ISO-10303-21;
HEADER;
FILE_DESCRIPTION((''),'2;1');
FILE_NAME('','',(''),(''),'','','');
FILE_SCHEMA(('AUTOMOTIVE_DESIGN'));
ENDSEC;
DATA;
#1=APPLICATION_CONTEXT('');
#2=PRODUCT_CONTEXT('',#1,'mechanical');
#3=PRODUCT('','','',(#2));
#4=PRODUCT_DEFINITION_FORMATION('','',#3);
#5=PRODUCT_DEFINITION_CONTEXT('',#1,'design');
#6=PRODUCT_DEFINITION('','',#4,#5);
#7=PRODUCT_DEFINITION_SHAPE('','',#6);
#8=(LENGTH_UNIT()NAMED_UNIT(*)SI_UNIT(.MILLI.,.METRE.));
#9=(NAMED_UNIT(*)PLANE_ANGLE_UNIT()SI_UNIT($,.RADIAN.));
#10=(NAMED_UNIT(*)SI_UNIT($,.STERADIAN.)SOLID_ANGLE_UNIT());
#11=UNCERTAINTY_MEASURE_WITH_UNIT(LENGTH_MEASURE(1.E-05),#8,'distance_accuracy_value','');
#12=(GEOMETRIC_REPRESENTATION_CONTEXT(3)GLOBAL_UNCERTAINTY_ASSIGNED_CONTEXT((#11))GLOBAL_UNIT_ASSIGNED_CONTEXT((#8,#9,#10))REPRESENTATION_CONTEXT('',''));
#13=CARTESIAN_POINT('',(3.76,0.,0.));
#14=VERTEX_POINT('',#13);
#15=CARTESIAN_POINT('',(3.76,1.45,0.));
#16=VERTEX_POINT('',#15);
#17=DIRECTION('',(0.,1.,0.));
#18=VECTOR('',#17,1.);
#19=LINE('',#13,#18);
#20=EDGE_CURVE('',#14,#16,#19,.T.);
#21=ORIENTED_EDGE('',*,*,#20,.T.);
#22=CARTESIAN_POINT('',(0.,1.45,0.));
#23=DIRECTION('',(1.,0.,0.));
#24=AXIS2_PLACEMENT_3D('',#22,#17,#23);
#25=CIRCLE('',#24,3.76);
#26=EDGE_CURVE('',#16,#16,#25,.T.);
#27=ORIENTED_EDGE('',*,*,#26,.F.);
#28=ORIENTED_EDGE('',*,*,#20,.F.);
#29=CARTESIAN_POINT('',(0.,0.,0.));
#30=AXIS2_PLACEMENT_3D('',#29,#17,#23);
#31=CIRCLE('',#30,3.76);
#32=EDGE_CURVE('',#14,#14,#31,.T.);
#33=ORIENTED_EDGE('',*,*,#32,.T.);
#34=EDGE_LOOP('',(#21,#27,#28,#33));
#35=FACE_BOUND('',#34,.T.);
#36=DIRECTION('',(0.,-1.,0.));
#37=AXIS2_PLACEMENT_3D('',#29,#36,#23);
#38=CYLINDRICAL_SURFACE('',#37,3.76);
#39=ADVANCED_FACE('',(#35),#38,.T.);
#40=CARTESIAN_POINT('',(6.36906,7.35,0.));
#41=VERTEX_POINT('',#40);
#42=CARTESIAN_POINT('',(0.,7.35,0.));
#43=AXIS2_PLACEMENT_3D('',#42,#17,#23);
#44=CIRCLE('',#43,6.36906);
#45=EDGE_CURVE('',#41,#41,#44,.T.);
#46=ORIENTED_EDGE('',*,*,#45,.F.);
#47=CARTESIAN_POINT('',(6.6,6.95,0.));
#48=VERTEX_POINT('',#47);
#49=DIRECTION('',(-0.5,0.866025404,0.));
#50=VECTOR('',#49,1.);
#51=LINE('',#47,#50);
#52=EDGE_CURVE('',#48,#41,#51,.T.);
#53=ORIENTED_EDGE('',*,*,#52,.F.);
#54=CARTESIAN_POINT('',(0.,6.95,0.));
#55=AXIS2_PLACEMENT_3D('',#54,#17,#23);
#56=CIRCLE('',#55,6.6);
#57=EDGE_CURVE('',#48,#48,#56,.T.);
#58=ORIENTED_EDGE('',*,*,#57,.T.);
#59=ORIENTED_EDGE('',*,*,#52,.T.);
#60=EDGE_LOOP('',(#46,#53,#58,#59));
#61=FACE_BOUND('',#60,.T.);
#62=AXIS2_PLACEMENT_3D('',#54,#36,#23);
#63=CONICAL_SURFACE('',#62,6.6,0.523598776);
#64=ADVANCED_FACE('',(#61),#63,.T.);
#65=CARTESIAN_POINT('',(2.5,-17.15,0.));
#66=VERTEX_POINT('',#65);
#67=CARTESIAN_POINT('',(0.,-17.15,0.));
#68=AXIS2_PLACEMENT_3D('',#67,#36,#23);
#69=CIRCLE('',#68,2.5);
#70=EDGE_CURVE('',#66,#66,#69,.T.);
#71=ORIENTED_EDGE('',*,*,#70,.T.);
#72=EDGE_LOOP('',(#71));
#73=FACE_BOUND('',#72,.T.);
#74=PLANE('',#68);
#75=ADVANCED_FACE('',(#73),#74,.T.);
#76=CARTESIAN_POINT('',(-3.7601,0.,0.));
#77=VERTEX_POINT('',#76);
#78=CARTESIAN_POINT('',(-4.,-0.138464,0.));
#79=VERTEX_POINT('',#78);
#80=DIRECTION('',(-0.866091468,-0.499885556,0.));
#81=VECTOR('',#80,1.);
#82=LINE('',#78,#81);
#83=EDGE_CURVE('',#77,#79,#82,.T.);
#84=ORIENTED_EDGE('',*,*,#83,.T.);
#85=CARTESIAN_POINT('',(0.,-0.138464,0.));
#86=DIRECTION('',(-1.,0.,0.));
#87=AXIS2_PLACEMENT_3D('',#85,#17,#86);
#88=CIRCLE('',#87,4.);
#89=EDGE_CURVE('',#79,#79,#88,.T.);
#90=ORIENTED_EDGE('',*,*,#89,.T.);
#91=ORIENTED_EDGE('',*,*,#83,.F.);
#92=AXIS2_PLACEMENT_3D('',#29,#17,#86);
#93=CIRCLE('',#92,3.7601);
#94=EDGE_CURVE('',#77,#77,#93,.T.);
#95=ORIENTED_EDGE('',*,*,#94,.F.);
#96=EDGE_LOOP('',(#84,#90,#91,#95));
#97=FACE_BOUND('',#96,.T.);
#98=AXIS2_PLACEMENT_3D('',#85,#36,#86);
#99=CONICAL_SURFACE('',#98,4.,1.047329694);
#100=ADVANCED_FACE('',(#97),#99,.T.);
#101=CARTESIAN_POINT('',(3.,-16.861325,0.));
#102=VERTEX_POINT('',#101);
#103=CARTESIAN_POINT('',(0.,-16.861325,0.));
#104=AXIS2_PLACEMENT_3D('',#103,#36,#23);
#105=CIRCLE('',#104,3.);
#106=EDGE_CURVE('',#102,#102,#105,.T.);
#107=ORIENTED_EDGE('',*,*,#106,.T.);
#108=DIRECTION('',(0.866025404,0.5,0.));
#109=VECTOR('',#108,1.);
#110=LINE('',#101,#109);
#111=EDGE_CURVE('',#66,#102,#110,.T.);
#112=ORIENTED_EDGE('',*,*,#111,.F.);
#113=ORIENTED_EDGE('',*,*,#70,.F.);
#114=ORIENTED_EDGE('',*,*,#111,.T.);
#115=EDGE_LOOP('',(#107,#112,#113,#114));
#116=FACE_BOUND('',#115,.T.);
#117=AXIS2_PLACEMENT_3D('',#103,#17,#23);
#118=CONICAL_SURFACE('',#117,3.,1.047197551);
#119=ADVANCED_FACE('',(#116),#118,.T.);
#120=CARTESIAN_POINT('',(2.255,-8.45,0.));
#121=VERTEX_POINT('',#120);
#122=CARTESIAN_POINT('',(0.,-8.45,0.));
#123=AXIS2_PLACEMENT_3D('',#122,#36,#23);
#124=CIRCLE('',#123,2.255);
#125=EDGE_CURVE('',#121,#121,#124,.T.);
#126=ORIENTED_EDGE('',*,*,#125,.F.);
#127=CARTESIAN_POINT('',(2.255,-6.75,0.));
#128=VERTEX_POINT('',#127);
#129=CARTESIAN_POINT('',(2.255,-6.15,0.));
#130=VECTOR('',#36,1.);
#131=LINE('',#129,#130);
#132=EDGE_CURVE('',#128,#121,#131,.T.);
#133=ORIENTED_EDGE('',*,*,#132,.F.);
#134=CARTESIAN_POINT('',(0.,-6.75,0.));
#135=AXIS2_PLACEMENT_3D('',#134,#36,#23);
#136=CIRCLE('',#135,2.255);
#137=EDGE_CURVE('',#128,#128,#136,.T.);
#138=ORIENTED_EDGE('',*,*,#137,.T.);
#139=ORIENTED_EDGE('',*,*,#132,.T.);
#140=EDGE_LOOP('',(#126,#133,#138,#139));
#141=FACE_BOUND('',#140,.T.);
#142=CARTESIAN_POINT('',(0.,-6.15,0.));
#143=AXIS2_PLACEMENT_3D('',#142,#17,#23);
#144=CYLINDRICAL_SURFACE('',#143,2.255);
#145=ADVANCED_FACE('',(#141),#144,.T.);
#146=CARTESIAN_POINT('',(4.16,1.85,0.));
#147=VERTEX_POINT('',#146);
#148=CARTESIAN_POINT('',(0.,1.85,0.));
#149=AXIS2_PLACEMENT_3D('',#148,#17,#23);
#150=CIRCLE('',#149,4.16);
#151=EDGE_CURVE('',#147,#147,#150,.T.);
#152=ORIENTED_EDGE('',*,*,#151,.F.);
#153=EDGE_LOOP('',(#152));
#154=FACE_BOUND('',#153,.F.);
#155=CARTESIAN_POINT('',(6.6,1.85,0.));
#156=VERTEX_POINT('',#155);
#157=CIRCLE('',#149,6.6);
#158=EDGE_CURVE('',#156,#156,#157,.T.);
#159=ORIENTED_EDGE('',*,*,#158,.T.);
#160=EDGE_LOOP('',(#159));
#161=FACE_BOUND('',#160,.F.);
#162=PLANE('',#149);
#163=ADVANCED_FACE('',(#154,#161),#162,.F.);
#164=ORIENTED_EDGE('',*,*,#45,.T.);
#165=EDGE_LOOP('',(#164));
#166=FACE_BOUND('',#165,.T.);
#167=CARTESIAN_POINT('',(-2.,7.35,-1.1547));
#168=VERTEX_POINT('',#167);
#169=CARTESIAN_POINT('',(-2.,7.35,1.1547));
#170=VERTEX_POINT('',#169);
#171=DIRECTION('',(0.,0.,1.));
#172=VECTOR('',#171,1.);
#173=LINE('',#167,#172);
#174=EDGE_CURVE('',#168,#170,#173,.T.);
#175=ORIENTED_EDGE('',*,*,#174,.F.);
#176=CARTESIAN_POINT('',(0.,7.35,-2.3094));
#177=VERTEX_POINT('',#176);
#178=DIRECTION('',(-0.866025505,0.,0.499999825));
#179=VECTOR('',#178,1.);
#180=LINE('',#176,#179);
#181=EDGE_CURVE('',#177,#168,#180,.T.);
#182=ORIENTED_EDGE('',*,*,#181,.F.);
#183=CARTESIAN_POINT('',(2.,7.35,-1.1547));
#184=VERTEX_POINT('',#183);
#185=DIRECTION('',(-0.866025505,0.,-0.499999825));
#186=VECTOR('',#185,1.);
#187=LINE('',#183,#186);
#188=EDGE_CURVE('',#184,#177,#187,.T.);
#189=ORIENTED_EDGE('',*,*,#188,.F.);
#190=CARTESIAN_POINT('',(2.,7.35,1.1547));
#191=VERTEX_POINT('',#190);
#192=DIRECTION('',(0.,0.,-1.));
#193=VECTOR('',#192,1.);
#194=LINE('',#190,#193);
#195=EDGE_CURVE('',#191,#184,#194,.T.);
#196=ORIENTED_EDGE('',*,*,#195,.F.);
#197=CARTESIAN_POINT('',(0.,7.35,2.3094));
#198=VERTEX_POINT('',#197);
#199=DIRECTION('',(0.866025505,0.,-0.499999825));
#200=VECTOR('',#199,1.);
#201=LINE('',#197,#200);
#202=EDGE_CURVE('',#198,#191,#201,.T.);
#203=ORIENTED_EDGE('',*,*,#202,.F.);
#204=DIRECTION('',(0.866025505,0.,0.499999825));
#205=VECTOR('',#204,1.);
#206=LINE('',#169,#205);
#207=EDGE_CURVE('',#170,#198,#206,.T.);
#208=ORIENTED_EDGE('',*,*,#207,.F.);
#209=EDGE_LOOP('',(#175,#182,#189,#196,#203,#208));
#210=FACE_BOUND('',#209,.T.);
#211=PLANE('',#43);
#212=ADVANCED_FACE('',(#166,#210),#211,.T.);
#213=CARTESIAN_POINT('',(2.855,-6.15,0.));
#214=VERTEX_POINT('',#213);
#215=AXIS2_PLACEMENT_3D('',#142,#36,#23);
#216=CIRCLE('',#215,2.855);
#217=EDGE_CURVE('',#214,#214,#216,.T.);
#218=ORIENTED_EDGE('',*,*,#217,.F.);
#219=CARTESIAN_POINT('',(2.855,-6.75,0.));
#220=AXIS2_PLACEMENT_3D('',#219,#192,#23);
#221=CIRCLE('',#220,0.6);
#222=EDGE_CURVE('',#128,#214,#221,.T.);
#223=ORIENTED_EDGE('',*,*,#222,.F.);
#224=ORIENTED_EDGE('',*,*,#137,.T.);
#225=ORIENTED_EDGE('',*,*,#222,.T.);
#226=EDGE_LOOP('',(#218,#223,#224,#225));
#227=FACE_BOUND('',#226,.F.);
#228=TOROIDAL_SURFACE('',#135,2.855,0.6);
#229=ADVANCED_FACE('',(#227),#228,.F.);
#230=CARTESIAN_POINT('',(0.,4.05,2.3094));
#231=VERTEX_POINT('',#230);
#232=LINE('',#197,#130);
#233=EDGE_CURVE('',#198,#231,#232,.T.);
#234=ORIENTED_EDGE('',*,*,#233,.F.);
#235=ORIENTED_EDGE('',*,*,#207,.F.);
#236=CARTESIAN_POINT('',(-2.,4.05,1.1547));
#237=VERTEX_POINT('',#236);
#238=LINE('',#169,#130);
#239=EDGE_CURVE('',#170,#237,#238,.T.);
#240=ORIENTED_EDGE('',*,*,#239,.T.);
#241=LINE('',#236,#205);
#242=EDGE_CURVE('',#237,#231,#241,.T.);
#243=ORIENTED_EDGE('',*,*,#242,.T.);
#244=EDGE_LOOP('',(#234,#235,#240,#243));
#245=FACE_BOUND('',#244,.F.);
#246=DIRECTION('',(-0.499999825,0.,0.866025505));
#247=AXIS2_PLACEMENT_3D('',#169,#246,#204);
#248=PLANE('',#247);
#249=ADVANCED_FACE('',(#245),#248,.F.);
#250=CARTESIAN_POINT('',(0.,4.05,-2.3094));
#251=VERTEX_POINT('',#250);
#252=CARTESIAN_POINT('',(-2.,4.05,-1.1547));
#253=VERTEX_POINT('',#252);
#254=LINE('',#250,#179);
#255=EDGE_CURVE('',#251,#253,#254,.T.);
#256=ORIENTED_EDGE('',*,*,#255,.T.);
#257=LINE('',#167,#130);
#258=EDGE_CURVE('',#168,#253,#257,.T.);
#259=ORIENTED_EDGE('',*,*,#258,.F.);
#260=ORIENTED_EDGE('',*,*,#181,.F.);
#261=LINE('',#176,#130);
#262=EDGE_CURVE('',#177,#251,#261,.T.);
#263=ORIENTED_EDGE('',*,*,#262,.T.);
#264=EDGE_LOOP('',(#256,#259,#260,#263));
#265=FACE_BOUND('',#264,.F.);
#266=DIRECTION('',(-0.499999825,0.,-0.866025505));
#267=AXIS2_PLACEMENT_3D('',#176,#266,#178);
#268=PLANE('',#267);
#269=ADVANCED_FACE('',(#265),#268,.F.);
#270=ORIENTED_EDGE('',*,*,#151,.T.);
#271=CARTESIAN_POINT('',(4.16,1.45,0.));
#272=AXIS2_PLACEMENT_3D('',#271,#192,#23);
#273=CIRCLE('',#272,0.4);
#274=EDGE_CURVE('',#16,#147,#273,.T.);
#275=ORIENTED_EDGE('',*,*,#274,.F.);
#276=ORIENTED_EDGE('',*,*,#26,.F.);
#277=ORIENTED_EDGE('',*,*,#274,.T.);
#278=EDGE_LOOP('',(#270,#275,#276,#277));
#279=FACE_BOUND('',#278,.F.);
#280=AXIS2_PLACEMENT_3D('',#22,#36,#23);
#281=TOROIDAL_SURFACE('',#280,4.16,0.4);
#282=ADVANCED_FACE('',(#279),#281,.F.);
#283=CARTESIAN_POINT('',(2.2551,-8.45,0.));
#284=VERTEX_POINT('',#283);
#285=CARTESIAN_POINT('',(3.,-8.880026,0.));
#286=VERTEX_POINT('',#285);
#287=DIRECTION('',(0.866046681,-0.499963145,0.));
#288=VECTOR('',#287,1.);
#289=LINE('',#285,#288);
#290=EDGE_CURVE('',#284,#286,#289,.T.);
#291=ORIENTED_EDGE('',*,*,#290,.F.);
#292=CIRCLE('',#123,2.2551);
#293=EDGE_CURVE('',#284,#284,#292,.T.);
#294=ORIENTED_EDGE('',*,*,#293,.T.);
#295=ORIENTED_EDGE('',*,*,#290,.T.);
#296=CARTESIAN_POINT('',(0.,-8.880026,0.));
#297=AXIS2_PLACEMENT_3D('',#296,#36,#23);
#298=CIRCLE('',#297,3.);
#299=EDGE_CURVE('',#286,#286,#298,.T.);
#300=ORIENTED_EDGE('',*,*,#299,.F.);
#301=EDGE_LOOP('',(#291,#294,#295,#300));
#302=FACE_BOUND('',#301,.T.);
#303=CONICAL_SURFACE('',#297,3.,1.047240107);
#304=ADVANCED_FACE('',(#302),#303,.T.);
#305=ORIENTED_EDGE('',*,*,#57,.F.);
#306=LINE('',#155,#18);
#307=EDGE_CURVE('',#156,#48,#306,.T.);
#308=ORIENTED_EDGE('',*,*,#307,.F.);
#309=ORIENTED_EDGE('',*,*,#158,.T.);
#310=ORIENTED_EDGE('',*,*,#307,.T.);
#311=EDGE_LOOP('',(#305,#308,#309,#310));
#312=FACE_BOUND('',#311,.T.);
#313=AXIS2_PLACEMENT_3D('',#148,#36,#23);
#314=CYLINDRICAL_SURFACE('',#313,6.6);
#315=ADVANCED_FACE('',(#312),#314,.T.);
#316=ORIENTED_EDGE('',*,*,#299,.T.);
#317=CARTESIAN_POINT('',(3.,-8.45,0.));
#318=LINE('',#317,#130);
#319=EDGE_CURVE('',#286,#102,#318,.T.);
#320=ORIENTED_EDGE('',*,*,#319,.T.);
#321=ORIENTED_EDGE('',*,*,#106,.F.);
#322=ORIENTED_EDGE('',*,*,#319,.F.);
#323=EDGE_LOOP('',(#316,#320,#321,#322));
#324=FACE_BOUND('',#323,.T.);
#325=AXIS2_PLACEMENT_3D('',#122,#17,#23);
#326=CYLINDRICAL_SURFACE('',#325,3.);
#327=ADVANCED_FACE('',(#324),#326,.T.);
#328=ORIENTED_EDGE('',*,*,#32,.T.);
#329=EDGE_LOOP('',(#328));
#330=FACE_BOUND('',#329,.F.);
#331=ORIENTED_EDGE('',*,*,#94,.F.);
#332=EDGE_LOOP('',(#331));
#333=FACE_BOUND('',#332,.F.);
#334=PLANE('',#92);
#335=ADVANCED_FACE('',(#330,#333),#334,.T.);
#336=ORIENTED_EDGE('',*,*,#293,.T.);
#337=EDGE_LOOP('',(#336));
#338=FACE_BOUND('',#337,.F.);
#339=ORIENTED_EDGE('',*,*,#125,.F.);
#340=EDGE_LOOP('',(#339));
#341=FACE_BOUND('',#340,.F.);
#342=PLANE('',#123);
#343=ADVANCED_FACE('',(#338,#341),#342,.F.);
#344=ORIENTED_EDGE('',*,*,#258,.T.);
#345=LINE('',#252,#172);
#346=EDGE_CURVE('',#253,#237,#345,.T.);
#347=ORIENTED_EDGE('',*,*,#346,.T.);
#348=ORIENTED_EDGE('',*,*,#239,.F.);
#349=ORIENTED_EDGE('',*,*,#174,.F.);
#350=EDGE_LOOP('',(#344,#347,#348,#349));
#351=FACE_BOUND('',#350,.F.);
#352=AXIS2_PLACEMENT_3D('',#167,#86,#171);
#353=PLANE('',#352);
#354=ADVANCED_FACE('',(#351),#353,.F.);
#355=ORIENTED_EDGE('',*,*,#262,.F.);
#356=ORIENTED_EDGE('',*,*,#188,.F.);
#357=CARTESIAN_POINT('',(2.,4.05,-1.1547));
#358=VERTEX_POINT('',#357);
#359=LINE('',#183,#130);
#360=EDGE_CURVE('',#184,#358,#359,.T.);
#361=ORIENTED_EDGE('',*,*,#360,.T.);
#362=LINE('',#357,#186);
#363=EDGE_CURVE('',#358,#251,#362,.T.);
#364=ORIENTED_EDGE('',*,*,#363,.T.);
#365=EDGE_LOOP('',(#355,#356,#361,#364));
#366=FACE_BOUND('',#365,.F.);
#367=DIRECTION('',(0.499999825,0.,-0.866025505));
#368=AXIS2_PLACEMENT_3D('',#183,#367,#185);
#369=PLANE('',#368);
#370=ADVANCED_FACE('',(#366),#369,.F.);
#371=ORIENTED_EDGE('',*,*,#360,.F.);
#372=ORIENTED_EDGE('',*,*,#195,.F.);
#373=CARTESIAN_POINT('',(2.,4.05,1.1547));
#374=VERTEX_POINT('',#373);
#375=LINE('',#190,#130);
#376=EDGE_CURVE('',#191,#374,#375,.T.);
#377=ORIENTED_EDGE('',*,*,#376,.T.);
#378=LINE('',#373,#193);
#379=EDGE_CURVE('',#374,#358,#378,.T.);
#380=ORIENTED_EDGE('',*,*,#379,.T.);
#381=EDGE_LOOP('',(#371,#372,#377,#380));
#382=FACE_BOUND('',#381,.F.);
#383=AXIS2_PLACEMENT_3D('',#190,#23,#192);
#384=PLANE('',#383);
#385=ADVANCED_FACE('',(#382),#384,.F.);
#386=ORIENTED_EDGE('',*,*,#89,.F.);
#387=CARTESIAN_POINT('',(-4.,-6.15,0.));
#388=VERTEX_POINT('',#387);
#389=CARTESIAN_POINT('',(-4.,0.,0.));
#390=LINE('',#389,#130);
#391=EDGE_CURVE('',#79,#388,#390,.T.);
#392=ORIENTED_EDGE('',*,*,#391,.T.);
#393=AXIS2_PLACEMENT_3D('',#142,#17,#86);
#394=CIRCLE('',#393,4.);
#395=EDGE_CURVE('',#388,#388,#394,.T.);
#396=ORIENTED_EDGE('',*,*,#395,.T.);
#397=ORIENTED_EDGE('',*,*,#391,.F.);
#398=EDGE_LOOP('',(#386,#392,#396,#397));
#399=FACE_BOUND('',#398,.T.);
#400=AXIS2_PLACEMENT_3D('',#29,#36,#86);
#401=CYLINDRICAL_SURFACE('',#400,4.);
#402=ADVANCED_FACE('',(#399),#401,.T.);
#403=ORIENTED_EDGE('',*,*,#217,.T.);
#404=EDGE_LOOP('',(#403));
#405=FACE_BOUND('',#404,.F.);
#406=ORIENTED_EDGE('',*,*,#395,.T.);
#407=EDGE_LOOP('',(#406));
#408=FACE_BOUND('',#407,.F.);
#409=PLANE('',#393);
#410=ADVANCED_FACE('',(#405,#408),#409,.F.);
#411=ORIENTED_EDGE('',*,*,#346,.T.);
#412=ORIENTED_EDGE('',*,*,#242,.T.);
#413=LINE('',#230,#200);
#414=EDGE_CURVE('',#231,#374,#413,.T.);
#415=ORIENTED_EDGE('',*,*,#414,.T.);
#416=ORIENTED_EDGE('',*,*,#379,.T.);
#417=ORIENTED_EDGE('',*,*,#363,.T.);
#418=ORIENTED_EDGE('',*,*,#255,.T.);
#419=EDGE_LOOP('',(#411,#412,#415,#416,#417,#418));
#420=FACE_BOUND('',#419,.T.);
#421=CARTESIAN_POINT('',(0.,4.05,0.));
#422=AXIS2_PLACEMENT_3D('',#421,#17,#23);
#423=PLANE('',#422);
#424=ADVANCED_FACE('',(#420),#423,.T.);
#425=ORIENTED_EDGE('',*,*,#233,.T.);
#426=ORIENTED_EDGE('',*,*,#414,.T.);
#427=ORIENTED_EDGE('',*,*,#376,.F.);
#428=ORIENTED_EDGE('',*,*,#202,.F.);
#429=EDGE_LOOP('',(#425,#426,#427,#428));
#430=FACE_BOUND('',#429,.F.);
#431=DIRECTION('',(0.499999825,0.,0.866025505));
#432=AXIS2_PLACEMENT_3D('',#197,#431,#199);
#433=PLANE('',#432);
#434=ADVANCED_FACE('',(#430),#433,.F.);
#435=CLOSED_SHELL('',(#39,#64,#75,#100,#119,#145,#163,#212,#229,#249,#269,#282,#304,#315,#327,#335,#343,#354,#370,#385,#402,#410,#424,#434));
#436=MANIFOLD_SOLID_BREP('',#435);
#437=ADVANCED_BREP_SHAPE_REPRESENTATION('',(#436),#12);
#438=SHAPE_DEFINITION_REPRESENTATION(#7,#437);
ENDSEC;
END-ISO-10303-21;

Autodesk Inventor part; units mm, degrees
ref_plane "YZ Plane" through (0, 0, 0) normal (1, 0, 0) x (0, 1, 0)
ref_plane "XZ Plane" through (0, 0, 0) normal (0, 1, 0) x (-1, 0, 0)
ref_plane "XY Plane" through (0, 0, 0) normal (0, 0, 1) x (1, 0, 0)
sketch "Sketch1" plane through (0, 0, 0) normal (0, 0, 1) x (1, 0, 0)
  line L0 (0, 0) -> (-4, 0)
  line L1 (-4, 0) -> (-4, -6.15)
  line L2 (-4, -6.15) -> (0, -6.15)
  line L3 (0, -6.15) -> (0, 0)
  line L4 (0, 0) -> (-13.1356, 0) construction
  dimension "d1" = 6.15
  dimension "d2" = 4
revolve "Shoulder" add sketch "Sketch1" angle 360 about axis through (0, -6.15, 0) along (0, 1, 0)
sketch "Sketch2" plane through (0, 0, 0) normal (0, 1, 0) x (1, 0, 0)
  circle A0 centre (0, 0) radius 4 projected
  circle A1 centre (0, 0) radius 3.76
  dimension "d3" = 7.52
extrude "Shoulder_neck" add sketch "Sketch2" along normal blind 1.85 contours A1
sketch "Sketch3" plane through (0, 1.85, 0) normal (0, 1, 0) x (1, 0, 0)
  circle A0 centre (0, 0) radius 3.76 projected
  circle A1 centre (0, 0) radius 6.6
  dimension "d6" = 13.2
extrude "Head" add sketch "Sketch3" along normal blind 5.5 contours A0 | A1
sketch "Sketch4" plane through (0, -6.15, 0) normal (0, -1, 0) x (1, 0, 0)
  circle A0 centre (0, 0) radius 4 projected
  circle A1 centre (0, 0) radius 2.255
  dimension "d9" = 4.51
extrude "Thread_neck" add sketch "Sketch4" along normal blind 2.3 contours A1
sketch "Sketch5" plane through (0, -8.45, 0) normal (0, -1, 0) x (1, 0, 0)
  circle A0 centre (0, 0) radius 2.255 projected
  circle A1 centre (0, 0) radius 3
  dimension "d12" = 6
extrude "Thread_shoulder" add sketch "Sketch5" along normal blind 8.7 contours A0 | A1
sketch "Sketch6" plane through (0, 7.35, 0) normal (0, 1, 0) x (1, 0, 0)
  circle A0 centre (0, 0) radius 6.6 projected
  circle A1 centre (0, 0) radius 2 construction
  line L0 (-2, 1.1547) -> (-2, -1.1547)
  line L1 (-2, -1.1547) -> (0, -2.3094)
  line L2 (0, -2.3094) -> (2, -1.1547)
  line L3 (2, -1.1547) -> (2, 1.1547)
  line L4 (2, 1.1547) -> (0, 2.3094)
  line L5 (0, 2.3094) -> (-2, 1.1547)
  dimension "d15" = 4
extrude "Hex" cut sketch "Sketch6" against normal blind 3.3 contours L5 L4 L3 L2 L1 L0
chamfer "Chamfer1" distance 0.24 angle 30 1 edges at (4, 0, 0) measured on face at (-3.8813, 0, -0.3191)
fillet "Fillet1" radius 0.4 1 edges at (-3.76, 1.85, 0)
chamfer "Chamfer2" distance 0.4 angle 30 1 edges at (-6.6, 7.35, 0) measured on face at (6.5145, 5.5167, 1.0587)
chamfer "Chamfer3" distance 0.5 angle 30 1 edges at (-3, -17.15, 0) measured on face at (-0.5351, -17.15, 1.0949)
fillet "Fillet2" radius 0.6 1 edges at (-2.255, -6.15, 0)
chamfer "Chamfer7" distance 0.745 angle 30 1 edges at (-3, -8.45, 0) measured on face at (2.7226, -8.45, -0.2393)
thread "Thread" size "M6x1" class "6g" standard "ANSI Metric M Profile" full length
equation "\"d3\" = Shoulder_neck_dia"
equation "\"d4\" = Shoulder_neck_length"
equation "\"d6\" = Head_diameter"
equation "\"d7\" = Head_height"
equation "\"d9\" = Thread_neck_dia"
equation "\"d10\" = Thread_neck_length"
equation "\"d12\" = Thread_diameter"
equation "\"d13\" = Thread_length - Thread_neck_length"
equation "\"d15\" = Hex_size"
equation "\"d16\" = Hex_length"
equation "\"d18\" = -0.5 * Shoulder_neck_dia + 0.5 * Shoulder_diameter"
equation "\"d64\" = -0.5 * Shoulder_neck_dia + 0.5 * Shoulder_diameter"
equation "\"d21\" = 0.1 * Hex_size"
equation "\"d65\" = 0.1 * Hex_size"
equation "\"d23\" = 0.5 * Thread_pitch"
equation "\"d66\" = 0.5 * Thread_pitch"
equation "\"d25\" = Thread_neck_radius"
equation "\"d60\" = -0.5 * Thread_neck_dia + 0.5 * Thread_diameter"
equation "\"d67\" = -0.5 * Thread_neck_dia + 0.5 * Thread_diameter"
equation "\"d1\" = Shoulder_length - Shoulder_neck_length"
equation "\"d2\" = 0.5 * Shoulder_diameter"
equation "\"Shoulder_diameter\" = 8"
equation "\"Shoulder_length\" = 8"
equation "\"Shoulder_neck_dia\" = 7.52"
equation "\"Thread_diameter\" = 6"
equation "\"Thread_length\" = 11"
equation "\"Head_diameter\" = 13.2"
equation "\"Head_height\" = 5.5"
equation "\"Thread_neck_dia\" = 4.51"
equation "\"Hex_size\" = 4"
equation "\"Hex_length\" = 3.3"
equation "\"Thread_pitch\" = 1"
equation "\"Shoulder_neck_length\" = 1.85"
equation "\"Thread_neck_length\" = 2.3"
equation "\"Thread_neck_radius\" = 0.6"
properties part number "SCREW,SHOULDER,M8X8MM" material "Steel, High Strength Low Alloy"
